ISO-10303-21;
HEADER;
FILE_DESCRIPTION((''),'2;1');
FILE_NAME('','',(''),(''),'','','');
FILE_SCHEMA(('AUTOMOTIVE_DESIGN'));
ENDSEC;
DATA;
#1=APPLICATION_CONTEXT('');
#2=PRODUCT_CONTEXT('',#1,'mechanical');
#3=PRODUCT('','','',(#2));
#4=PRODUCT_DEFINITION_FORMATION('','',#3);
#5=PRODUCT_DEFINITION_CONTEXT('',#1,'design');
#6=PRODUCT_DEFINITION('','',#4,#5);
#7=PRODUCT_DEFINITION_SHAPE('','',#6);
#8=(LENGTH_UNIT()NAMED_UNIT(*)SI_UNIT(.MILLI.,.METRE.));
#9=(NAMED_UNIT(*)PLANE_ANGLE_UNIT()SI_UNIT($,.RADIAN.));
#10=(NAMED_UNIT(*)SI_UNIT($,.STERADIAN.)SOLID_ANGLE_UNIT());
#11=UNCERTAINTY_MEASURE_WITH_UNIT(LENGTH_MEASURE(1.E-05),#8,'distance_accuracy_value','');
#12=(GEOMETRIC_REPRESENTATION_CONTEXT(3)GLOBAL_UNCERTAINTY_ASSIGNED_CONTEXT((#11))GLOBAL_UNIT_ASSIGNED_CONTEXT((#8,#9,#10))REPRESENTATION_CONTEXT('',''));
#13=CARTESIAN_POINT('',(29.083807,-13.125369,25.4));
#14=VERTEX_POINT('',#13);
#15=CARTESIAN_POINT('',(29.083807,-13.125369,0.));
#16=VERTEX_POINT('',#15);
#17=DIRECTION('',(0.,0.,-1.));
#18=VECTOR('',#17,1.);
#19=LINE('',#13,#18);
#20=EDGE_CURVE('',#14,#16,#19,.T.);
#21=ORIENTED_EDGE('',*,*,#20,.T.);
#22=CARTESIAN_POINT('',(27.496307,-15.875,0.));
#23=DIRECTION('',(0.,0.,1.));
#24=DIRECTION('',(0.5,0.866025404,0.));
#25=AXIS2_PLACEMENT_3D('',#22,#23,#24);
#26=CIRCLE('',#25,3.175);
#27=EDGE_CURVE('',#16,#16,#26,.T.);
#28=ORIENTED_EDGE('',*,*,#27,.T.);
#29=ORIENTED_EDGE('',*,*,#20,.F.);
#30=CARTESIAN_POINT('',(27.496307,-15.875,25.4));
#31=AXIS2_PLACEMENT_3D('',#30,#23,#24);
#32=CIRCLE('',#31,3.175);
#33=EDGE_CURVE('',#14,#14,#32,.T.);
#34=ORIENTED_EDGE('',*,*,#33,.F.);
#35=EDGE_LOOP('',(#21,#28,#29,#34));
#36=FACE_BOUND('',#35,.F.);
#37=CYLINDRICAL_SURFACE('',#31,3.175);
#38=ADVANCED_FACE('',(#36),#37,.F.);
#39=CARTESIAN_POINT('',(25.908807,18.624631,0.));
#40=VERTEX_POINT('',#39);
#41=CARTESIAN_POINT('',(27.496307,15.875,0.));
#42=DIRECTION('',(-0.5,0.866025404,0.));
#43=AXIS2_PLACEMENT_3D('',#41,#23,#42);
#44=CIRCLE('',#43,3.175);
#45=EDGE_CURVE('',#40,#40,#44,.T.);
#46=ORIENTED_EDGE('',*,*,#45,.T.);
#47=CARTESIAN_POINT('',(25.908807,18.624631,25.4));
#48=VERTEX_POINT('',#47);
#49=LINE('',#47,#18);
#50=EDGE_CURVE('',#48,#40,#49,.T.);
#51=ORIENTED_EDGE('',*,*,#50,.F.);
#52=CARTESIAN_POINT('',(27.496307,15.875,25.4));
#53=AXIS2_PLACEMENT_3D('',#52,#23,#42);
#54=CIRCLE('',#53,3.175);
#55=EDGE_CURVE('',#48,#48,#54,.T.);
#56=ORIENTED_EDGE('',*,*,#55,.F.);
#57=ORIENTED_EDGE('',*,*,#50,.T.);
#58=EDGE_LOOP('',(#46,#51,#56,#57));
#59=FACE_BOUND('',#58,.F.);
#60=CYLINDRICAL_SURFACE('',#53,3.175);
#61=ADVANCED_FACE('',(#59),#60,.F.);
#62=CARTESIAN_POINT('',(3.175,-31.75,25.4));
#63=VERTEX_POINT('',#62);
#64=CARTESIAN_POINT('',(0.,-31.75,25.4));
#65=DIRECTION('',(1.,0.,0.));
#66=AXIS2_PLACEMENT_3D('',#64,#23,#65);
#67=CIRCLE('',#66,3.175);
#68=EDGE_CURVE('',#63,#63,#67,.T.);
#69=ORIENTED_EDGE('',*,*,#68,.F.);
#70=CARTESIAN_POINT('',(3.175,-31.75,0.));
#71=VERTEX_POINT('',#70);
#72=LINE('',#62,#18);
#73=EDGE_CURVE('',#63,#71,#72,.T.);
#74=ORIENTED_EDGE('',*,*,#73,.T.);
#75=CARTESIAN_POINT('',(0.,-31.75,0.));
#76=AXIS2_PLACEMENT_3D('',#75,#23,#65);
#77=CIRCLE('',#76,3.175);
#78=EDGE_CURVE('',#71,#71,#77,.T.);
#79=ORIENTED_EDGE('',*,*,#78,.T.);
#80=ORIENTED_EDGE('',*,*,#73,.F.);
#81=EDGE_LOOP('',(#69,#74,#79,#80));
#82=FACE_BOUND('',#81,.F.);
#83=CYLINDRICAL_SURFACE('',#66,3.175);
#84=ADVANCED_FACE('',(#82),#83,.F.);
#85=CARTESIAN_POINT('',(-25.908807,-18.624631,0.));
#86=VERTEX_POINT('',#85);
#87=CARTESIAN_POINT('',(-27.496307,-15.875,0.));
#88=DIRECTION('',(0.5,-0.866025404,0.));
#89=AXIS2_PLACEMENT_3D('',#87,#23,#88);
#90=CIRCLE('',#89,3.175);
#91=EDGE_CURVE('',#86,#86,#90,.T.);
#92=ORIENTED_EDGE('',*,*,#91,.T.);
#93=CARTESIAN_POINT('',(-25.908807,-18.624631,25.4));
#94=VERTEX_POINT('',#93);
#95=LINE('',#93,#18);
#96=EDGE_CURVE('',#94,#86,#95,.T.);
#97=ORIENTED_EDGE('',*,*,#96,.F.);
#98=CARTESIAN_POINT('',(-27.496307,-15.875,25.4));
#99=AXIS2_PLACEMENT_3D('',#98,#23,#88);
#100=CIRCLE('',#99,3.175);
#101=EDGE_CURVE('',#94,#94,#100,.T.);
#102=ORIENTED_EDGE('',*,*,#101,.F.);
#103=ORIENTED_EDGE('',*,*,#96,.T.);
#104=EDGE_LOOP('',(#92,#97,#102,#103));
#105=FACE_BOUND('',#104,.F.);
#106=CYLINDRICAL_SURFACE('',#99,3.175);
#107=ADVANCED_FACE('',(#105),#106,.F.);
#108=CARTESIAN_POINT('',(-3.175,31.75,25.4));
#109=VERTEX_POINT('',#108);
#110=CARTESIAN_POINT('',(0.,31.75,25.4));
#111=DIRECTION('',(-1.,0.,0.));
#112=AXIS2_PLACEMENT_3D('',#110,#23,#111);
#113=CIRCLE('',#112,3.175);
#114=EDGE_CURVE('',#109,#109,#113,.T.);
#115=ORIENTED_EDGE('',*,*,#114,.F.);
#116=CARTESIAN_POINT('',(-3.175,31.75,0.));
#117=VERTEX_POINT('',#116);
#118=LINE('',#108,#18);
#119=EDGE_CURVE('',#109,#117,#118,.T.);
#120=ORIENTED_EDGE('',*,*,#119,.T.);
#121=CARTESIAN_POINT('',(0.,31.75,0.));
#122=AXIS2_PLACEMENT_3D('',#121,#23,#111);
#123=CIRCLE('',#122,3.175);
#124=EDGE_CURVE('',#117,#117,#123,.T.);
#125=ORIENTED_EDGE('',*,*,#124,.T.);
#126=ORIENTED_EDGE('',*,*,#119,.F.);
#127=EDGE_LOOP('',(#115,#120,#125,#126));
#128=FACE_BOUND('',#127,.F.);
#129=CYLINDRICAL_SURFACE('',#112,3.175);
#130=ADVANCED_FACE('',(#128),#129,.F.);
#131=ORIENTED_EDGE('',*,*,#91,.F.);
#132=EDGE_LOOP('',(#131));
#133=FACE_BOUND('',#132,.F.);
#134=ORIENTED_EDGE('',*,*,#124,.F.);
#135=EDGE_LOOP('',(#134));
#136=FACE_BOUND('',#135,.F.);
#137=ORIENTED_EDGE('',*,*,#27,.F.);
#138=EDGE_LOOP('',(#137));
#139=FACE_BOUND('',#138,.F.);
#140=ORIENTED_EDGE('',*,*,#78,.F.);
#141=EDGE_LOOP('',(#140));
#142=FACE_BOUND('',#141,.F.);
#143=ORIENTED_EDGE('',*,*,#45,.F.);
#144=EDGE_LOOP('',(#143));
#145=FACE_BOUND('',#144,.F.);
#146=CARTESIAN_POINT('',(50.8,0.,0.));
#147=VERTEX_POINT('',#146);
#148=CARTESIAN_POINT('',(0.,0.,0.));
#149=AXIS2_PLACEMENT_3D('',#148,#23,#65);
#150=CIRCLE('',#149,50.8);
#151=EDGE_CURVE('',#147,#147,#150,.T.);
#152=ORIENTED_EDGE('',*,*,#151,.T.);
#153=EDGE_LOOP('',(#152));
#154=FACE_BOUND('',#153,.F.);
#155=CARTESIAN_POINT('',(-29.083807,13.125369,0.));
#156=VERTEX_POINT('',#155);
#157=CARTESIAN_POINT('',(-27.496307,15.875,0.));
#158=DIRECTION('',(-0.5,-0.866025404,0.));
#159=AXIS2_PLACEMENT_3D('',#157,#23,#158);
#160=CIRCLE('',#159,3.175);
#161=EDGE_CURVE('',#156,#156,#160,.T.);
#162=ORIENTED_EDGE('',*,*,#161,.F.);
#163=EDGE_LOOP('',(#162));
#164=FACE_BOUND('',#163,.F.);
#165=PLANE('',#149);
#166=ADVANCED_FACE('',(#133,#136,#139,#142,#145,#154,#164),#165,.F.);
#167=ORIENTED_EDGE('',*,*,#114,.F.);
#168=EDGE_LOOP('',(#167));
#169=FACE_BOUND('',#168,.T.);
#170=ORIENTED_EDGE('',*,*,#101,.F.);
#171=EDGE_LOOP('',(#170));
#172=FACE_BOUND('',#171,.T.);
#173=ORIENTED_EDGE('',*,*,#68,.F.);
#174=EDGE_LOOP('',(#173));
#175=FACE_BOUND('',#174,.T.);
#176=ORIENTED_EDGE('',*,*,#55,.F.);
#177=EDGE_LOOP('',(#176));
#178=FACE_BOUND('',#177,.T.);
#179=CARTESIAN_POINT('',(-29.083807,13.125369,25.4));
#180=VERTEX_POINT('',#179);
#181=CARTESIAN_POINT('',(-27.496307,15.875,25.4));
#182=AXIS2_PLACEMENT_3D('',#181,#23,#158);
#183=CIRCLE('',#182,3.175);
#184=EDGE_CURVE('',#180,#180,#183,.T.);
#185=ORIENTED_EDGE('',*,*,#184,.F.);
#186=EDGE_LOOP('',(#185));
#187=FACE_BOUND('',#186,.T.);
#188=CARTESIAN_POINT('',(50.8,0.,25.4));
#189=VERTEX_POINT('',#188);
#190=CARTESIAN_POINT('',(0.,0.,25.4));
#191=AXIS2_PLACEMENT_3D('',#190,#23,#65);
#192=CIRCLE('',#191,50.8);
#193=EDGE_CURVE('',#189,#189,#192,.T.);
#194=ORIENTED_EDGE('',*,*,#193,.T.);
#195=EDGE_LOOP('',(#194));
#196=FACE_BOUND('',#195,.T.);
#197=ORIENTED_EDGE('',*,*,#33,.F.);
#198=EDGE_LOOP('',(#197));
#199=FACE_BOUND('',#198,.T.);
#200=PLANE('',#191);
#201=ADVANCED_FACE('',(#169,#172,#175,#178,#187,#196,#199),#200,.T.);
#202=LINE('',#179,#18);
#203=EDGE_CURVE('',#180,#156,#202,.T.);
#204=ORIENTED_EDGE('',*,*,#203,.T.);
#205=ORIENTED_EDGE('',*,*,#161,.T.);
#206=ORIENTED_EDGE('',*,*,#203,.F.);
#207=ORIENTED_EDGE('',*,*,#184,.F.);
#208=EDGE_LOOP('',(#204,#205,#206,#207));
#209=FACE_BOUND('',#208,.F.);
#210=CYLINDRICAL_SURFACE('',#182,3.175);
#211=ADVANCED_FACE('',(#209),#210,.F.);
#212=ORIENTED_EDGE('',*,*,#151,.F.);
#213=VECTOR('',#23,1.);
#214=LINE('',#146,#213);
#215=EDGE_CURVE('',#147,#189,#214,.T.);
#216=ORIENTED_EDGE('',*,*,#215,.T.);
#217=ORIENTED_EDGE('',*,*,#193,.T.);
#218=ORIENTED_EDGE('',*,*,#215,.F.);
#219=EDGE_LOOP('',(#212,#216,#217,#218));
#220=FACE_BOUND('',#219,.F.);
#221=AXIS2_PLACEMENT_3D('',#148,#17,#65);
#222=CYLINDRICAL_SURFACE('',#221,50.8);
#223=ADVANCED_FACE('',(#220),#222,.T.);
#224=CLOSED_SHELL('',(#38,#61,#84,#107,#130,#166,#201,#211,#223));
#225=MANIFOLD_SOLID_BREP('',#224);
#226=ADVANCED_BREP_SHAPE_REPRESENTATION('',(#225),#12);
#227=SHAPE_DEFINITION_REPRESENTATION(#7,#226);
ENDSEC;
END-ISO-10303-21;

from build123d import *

# Parameters (mm, degrees)
F0_R            = 50.8
F1_DEPTH        = 25.4
F2_R            = 3.175
F3_DEPTH        = 25.401
F3_COPIES_COUNT = 6


# Not quite as in the source:
# - a pattern or mirror of a feature is missing from the dataset's text; its kind, count and spacing are read off the source's solid


with BuildPart() as f1:
    # F0 (on Top) → F1 (new body)
    with BuildSketch(Plane.XY):
        Circle(F0_R)
    extrude(amount=F1_DEPTH)

    # F2 (on face) → F3 (cut, through all)
    with BuildSketch(Plane.XY.offset(25.4)):
        with Locations((0, -31.75)):
            Circle(F2_R)
    f3 = extrude(amount=-F3_DEPTH, mode=Mode.SUBTRACT)

    # F3_copies: F3 ×6 about axis
    f3_copies_axis = Axis((0, 0, 0), (0, 0, 1))
    for i in range(1, F3_COPIES_COUNT):
        add(f3.rotate(f3_copies_axis, i * 360 / F3_COPIES_COUNT), mode=Mode.SUBTRACT)


solid = f1.part
